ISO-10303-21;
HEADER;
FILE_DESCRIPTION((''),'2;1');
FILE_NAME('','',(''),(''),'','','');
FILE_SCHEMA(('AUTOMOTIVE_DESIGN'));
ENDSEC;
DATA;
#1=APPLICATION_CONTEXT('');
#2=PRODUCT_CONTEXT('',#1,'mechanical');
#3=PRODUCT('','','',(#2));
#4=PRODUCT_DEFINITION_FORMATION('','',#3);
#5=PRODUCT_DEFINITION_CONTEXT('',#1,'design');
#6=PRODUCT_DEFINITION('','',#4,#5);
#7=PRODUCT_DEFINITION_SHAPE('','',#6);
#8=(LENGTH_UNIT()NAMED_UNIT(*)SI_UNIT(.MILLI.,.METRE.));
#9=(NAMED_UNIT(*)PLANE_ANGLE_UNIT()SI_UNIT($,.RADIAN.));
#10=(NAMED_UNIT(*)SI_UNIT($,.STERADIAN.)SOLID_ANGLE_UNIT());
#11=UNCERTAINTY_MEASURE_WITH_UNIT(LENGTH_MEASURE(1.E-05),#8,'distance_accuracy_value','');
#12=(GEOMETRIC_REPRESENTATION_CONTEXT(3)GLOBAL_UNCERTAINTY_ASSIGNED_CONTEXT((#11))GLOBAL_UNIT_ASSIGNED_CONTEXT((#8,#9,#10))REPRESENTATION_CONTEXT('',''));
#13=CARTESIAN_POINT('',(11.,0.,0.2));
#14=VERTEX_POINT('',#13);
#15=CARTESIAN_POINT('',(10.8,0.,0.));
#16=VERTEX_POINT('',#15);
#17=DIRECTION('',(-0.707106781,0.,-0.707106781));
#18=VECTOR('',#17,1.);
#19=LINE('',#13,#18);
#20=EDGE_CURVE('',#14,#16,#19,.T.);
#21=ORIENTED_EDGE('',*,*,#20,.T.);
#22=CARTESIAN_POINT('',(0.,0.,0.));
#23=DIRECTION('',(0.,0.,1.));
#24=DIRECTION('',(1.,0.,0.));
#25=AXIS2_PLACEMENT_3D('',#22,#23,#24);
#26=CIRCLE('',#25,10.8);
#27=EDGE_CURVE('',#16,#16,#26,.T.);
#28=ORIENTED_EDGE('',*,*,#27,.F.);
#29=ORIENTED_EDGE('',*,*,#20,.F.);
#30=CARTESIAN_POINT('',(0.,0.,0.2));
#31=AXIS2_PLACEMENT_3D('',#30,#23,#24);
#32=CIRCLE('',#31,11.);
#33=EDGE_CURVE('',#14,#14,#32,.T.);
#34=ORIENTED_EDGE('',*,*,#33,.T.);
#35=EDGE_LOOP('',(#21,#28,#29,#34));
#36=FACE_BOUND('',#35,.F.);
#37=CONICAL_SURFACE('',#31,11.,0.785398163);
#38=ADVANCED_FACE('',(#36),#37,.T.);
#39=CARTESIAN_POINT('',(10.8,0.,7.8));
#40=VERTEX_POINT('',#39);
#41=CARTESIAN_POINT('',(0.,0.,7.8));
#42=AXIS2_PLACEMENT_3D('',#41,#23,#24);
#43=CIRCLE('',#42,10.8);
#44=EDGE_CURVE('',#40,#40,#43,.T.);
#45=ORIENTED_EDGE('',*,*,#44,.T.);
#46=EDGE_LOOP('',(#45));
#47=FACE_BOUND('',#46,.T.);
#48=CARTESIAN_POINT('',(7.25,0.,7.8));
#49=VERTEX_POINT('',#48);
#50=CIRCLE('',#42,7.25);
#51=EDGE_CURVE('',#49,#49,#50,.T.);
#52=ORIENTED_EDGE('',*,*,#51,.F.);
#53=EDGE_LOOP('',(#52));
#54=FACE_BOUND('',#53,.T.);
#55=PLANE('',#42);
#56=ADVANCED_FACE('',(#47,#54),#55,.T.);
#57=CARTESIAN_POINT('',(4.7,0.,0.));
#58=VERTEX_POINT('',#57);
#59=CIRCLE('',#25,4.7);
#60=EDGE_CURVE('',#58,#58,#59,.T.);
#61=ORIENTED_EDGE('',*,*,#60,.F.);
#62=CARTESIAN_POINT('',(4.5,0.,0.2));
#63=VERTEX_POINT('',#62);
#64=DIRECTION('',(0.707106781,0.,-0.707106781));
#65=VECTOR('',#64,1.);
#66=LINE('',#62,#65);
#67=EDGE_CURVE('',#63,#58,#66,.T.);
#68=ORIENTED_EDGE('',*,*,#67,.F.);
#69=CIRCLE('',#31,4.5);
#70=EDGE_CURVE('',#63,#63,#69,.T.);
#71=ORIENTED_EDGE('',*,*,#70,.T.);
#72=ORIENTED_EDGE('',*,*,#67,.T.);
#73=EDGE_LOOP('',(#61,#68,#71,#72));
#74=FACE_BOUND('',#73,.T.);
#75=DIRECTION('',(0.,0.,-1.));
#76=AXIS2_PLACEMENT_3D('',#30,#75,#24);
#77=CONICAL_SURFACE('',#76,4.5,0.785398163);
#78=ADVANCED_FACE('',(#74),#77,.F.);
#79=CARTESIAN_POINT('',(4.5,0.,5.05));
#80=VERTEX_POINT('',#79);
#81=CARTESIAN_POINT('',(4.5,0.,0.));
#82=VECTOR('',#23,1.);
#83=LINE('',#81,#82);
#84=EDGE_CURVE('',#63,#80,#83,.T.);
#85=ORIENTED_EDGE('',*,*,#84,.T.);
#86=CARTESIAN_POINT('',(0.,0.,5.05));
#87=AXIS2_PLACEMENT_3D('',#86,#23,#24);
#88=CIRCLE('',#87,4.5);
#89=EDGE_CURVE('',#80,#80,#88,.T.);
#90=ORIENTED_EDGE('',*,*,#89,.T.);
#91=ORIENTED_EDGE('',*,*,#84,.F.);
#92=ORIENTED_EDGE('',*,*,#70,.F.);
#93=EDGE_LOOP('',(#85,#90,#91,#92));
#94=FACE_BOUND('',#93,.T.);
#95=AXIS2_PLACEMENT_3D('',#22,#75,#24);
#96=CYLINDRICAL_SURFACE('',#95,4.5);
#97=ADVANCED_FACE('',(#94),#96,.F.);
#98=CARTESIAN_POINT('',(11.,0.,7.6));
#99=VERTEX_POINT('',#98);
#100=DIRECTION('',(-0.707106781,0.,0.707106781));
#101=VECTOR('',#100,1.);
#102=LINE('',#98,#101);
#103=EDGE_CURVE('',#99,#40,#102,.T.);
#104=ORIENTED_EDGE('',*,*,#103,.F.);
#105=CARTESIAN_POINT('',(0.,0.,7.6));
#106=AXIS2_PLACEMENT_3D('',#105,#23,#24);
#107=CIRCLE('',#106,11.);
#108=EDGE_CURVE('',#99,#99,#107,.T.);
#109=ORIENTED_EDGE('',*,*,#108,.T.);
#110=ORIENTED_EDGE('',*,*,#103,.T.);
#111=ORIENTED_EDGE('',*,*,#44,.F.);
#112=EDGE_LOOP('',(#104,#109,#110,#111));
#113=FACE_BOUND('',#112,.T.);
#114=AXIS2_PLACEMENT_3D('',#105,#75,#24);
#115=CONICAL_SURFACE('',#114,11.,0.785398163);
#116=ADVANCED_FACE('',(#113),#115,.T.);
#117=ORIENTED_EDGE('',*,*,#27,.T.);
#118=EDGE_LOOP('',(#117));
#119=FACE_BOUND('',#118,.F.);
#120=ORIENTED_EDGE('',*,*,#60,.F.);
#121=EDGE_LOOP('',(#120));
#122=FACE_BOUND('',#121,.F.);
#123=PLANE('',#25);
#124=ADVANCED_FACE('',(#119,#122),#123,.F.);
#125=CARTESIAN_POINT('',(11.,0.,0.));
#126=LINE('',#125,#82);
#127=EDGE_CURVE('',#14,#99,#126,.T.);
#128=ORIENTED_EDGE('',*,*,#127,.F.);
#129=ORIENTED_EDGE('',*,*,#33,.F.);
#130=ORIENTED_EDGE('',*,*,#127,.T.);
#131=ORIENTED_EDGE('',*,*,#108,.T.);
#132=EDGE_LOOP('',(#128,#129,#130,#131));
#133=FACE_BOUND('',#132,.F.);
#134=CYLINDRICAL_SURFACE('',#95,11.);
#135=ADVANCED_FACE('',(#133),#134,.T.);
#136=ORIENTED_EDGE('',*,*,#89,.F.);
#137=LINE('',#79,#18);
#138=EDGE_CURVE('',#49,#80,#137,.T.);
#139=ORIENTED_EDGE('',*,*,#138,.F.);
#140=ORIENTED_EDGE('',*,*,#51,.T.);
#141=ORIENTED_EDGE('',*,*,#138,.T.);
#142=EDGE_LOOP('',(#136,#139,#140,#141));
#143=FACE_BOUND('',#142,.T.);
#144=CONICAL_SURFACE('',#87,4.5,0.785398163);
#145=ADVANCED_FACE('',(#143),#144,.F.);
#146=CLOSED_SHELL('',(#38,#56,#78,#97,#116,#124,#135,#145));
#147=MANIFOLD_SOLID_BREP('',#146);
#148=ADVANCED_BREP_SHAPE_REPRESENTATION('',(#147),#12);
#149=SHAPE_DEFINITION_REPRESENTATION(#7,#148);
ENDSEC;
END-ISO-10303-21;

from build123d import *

# Parameters (mm, degrees)
F0_R     = 11
F0_R_2   = 4.5
F1_DEPTH = 7.8
F2_SIZE  = 0.2
F3_SIZE  = 2.75


with BuildPart() as f1:
    # F0 (on Top) → F1 (new body)
    with BuildSketch(Plane.XY):
        Circle(F0_R)
        Circle(F0_R_2, mode=Mode.SUBTRACT)
    extrude(amount=F1_DEPTH)

    # F2
    f2_edges = [f1.edges().sort_by_distance(p)[0] for p in [
        (-11, 0, 7.8),
        (-11, 0, 0),
        (-4.5, 0, 0),
    ]]
    chamfer(f2_edges, length=F2_SIZE)

    # F3
    f3_edges = [f1.edges().sort_by_distance(p)[0] for p in [
        (-4.5, 0, 7.8),
    ]]
    chamfer(f3_edges, length=F3_SIZE)


solid = f1.part
